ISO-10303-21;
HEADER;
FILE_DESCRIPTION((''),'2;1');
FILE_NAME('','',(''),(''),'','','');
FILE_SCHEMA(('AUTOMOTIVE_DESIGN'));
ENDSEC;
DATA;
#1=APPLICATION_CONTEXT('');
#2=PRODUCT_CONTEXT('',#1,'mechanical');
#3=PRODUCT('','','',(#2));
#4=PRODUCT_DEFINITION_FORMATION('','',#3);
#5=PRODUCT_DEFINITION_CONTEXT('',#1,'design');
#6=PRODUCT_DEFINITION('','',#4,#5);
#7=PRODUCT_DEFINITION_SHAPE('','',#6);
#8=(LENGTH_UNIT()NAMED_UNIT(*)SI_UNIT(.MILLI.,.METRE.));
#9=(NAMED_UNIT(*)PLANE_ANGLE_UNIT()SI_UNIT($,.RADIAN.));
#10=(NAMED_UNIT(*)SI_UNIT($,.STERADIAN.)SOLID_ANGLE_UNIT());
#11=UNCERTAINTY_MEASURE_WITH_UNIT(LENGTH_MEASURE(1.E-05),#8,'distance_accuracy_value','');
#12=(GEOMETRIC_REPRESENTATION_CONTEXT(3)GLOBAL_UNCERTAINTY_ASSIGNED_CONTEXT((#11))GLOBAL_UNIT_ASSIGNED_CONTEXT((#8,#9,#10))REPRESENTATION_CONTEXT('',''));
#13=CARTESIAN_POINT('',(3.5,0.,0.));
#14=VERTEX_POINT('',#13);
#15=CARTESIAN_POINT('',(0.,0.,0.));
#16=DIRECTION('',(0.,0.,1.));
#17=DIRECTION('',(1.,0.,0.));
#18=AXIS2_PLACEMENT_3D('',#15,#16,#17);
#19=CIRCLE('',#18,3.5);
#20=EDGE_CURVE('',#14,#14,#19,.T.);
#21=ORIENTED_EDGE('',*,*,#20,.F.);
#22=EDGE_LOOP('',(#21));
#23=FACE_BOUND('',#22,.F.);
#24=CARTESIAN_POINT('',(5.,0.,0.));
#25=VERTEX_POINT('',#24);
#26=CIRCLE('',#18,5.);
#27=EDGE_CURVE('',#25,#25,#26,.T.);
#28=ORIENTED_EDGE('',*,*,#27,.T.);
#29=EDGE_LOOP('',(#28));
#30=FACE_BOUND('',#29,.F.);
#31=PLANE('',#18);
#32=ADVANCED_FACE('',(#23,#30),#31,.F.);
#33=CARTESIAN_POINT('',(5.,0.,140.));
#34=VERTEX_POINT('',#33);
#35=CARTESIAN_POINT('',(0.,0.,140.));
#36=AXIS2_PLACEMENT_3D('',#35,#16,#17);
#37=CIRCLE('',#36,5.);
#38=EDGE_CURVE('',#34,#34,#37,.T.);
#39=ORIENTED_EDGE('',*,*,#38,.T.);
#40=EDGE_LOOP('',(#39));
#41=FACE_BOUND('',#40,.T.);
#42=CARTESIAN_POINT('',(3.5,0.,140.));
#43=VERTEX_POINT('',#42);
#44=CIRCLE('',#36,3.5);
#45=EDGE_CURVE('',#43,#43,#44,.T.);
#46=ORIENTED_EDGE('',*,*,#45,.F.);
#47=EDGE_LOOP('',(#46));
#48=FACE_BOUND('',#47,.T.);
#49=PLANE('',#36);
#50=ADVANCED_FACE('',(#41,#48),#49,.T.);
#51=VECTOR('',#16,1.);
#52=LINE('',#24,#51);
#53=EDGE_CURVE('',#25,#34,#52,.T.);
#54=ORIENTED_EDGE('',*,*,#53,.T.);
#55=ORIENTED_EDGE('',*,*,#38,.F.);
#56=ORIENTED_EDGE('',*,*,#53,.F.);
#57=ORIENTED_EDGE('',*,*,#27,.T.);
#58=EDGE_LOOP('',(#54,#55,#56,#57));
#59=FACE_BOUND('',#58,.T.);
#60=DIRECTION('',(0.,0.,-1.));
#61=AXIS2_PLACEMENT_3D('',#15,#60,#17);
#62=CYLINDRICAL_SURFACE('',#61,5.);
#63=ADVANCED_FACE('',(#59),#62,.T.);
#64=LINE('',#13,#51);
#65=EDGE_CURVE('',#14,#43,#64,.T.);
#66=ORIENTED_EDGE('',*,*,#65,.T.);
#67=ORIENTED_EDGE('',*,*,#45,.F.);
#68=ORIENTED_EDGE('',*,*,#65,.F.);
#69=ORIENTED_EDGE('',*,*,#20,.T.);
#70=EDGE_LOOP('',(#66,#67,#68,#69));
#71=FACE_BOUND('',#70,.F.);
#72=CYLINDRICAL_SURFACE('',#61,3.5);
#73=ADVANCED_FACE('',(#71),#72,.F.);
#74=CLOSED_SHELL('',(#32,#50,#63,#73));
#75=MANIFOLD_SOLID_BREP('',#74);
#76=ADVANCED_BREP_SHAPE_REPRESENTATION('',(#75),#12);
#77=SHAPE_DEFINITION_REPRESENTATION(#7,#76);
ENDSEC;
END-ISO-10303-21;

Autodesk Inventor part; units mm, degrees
ref_plane "YZ Plane" through (0, 0, 0) normal (1, 0, 0) x (0, 1, 0)
ref_plane "XZ Plane" through (0, 0, 0) normal (0, 1, 0) x (-1, 0, 0)
ref_plane "XY Plane" through (0, 0, 0) normal (0, 0, 1) x (1, 0, 0)
sketch "Sketch1" plane through (0, 0, 0) normal (0, 0, 1) x (1, 0, 0)
  circle A0 centre (0, 0) radius 5
  circle A1 centre (0, 0) radius 3.5
  dimension "d0" = 10
  dimension "d1" = 1.5
extrude "Extrusion1" add sketch "Sketch1" along normal blind 140
thread "Thread1" size "M8x1.25" class "6g" standard "ANSI Metric M Profile" length 10
thread "Thread2" size "M6x1" class "6g" standard "ANSI Metric M Profile" length 10
properties part number "Rod qty-6" material "Aluminum 6061"
